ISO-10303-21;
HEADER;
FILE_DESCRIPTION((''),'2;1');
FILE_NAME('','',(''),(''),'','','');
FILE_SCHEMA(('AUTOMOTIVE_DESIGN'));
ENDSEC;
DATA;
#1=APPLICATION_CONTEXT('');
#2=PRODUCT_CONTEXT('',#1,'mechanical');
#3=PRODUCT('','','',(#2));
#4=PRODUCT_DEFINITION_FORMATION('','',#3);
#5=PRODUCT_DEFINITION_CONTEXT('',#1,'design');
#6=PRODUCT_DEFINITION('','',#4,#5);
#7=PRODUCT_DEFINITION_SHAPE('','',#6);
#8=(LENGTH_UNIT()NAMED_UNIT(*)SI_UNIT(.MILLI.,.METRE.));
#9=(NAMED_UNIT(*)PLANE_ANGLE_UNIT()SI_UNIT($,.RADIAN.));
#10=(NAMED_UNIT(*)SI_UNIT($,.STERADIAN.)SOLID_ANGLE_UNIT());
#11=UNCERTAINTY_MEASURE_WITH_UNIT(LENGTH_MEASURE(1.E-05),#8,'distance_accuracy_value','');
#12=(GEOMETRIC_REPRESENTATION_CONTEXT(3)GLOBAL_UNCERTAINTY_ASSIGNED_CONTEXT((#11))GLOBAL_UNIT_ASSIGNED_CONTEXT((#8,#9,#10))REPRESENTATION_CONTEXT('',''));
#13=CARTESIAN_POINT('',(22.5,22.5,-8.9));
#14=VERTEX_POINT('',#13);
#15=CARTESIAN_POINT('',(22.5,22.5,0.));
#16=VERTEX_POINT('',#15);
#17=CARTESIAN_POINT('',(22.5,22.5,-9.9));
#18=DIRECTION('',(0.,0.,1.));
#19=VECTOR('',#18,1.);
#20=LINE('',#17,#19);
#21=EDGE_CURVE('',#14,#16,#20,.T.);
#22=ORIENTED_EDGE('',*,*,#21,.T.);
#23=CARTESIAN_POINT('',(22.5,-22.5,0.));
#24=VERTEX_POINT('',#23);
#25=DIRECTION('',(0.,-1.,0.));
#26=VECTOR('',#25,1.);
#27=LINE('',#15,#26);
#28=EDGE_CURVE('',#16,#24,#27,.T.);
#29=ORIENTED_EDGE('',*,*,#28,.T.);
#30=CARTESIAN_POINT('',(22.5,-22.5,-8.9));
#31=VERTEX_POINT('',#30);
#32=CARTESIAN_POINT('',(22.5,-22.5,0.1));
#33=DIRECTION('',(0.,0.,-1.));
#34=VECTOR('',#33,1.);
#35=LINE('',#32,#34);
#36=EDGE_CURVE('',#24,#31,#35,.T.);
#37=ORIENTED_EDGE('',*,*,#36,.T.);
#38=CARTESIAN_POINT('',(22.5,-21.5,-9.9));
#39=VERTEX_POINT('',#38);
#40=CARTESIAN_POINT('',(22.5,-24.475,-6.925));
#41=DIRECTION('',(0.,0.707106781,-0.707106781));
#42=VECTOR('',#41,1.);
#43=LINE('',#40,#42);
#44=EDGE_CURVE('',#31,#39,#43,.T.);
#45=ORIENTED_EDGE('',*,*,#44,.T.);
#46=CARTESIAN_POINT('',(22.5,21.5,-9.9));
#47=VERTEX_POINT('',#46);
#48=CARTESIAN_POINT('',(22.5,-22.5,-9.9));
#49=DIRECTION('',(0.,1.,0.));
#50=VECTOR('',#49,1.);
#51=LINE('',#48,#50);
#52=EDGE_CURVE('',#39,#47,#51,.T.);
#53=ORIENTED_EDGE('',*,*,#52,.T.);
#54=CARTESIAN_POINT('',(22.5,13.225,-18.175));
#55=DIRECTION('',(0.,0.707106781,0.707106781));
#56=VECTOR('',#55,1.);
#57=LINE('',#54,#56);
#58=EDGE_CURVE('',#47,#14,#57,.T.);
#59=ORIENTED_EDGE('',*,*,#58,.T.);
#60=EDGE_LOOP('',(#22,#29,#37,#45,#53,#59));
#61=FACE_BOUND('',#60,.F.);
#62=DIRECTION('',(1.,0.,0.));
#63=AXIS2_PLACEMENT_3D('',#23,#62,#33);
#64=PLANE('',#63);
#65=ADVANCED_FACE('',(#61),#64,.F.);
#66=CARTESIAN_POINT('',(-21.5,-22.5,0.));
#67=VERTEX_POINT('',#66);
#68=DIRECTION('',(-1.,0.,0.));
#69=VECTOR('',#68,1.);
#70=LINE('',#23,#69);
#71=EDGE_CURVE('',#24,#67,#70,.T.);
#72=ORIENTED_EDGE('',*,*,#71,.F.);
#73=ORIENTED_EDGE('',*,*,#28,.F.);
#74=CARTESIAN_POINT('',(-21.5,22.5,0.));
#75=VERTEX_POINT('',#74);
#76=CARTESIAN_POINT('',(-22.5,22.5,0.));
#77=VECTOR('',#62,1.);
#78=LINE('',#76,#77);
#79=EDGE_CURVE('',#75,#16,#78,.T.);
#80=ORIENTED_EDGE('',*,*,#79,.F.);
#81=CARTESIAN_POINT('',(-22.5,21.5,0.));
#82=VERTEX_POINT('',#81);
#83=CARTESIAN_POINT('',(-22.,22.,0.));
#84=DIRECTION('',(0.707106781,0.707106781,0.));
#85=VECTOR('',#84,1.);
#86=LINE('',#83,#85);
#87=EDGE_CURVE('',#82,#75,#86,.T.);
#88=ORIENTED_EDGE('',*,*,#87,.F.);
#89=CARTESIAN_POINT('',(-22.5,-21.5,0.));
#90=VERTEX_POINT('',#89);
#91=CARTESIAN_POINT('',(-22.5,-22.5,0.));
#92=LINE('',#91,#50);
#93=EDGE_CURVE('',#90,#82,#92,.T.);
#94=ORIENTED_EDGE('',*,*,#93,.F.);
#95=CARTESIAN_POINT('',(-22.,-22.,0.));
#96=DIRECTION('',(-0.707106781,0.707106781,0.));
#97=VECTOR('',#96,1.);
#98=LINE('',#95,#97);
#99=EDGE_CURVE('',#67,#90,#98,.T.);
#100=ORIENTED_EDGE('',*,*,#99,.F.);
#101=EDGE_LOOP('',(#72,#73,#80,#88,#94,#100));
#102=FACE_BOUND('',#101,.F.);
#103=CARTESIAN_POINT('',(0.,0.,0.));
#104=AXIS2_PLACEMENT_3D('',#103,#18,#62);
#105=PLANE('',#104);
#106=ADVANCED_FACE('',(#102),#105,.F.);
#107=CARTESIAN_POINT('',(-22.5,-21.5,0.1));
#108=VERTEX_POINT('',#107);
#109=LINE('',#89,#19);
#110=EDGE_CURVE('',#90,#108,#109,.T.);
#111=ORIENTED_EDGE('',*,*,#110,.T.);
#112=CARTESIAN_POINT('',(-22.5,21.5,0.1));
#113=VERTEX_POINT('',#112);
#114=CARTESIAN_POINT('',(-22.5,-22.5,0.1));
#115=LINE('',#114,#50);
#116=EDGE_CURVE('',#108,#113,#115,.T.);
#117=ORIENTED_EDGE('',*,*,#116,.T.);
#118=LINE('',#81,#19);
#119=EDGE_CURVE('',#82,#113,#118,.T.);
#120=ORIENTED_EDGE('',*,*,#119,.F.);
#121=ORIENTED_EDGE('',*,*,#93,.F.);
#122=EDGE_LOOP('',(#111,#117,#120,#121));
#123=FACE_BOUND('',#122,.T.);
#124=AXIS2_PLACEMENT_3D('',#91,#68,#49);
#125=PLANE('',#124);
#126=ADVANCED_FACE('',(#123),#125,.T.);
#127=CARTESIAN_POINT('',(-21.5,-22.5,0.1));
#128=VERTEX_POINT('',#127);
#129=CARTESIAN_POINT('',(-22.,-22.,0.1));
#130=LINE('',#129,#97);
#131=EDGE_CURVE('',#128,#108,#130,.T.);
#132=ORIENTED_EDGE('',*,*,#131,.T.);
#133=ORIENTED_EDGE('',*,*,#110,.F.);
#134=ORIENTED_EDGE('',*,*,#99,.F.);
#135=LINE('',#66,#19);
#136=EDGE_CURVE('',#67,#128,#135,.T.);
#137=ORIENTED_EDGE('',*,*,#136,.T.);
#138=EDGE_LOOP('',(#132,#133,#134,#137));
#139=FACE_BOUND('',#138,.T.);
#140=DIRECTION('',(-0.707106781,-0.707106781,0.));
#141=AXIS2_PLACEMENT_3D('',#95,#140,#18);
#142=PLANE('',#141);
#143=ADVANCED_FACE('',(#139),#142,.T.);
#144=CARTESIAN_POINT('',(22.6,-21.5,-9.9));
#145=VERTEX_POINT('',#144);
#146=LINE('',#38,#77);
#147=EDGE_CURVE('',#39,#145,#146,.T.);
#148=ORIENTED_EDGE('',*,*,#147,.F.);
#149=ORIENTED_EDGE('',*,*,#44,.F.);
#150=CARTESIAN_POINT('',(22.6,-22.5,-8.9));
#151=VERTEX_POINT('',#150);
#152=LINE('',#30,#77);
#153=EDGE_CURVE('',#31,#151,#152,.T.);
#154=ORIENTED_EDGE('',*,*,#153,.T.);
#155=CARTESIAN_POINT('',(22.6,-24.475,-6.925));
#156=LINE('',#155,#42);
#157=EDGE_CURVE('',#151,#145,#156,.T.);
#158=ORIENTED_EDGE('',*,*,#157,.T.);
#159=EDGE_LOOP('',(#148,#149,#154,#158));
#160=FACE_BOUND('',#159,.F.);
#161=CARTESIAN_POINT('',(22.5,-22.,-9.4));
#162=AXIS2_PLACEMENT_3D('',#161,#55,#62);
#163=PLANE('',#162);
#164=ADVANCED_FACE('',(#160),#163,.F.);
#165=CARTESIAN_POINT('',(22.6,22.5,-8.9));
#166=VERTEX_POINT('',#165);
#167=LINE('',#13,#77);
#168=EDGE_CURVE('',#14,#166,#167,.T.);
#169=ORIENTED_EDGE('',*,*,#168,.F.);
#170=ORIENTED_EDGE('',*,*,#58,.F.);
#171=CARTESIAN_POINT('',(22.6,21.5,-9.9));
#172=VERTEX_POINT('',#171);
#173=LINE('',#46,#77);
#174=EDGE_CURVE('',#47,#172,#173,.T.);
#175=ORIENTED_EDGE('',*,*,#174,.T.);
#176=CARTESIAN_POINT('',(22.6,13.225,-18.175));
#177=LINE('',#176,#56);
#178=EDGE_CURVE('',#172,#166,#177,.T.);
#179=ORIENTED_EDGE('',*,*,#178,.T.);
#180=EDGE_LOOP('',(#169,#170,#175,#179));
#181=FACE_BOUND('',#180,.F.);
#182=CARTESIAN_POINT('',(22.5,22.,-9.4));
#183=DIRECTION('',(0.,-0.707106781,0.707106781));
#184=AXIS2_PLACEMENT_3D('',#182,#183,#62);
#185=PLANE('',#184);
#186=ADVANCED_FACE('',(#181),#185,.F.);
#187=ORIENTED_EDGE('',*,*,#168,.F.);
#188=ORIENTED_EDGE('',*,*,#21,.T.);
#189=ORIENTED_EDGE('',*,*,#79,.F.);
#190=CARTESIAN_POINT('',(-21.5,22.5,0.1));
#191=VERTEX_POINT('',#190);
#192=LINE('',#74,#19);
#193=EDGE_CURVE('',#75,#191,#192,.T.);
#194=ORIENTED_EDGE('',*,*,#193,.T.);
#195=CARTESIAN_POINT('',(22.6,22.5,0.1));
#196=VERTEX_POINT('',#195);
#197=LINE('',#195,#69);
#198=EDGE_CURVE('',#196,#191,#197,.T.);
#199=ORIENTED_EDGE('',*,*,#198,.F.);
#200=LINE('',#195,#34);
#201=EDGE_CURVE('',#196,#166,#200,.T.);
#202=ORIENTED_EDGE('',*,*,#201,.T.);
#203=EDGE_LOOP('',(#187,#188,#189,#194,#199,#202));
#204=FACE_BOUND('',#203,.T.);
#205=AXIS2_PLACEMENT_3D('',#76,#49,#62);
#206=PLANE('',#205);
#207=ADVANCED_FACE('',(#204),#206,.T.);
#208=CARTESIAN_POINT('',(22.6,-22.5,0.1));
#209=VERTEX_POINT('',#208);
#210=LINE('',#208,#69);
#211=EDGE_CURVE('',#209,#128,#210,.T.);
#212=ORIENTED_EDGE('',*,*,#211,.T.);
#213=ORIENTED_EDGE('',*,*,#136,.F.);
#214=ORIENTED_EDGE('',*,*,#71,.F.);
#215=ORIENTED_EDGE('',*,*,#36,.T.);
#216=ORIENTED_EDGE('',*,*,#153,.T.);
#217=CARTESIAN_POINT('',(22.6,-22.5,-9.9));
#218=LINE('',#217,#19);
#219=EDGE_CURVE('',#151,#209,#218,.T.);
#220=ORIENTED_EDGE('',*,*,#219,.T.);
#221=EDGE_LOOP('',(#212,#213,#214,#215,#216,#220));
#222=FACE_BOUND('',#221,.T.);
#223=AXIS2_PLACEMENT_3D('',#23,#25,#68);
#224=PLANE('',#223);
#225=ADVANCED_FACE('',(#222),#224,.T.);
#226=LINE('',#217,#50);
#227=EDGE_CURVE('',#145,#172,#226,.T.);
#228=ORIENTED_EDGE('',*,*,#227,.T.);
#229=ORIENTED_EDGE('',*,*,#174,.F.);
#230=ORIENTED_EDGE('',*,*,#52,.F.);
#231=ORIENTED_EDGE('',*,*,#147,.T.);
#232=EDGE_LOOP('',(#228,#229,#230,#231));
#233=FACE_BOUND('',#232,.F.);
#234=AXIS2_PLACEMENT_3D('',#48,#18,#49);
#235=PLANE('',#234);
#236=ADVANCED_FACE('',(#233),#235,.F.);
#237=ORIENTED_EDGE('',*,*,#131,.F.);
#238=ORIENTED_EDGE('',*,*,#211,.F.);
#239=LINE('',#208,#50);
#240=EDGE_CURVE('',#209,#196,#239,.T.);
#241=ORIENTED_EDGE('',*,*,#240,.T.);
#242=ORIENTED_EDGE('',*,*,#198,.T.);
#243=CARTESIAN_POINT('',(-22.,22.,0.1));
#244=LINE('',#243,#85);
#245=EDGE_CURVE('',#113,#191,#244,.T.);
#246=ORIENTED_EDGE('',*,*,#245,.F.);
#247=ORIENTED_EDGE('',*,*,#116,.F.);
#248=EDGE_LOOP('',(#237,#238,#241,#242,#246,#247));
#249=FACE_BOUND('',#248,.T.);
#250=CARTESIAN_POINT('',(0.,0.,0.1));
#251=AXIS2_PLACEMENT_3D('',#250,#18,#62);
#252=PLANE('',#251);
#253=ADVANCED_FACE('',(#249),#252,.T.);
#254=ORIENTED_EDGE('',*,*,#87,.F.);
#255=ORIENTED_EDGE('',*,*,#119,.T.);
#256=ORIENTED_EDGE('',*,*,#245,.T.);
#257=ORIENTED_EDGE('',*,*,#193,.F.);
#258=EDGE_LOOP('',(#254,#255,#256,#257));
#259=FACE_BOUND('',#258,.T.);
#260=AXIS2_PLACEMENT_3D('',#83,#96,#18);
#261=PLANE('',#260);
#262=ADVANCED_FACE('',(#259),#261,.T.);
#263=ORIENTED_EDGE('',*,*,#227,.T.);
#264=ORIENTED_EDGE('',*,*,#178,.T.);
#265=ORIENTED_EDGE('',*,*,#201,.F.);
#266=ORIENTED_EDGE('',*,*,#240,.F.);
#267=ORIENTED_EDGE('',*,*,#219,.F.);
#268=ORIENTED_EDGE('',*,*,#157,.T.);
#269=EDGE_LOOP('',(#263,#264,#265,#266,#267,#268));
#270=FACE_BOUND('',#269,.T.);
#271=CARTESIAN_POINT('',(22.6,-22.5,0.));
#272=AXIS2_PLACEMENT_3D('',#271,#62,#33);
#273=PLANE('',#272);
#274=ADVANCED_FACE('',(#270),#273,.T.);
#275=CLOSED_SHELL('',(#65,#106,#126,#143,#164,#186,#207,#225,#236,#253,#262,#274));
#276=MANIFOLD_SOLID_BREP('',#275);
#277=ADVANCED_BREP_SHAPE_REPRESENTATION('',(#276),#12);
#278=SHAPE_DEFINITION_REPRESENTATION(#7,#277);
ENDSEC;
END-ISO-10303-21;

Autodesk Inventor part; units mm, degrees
ref_plane "YZ Plane" through (0, 0, 0) normal (1, 0, 0) x (0, 1, 0)
ref_plane "XZ Plane" through (0, 0, 0) normal (0, 1, 0) x (-1, 0, 0)
ref_plane "XY Plane" through (0, 0, 0) normal (0, 0, 1) x (1, 0, 0)
sketch "Sketch1" plane through (0, 0, 0) normal (0, 0, 1) x (1, 0, 0)
  line L0 (22, -19) -> (22, 19) projected
  line L1 (-19, -22) -> (19, -22) projected
  line L2 (22.5, 22.5) -> (22.5, -22.5)
  line L3 (22.5, -22.5) -> (-22.5, -22.5)
  line L4 (-22.5, -22.5) -> (-22.5, 22.5)
  line L5 (-22.5, 22.5) -> (22.5, 22.5)
  line L6 (22.5, 22.5) -> (-22.5, -22.5) construction
  line L7 (22.5, -22.5) -> (-22.5, 22.5) construction
  point P0 (0, 0)
  dimension "d0" = 45
  dimension "d1" = 45
extrude "Extrusion1" add sketch "Sketch1" along normal blind 0.1
sketch "Sketch2" plane through (22.5, -22.5, 0) normal (1, 0, 0) x (0, 0, -1)
  line L0 (-0.1, 0) -> (-0.1, 45) projected
  line L1 (0, 0) -> (0, 45) projected
  line L2 (0, 45) -> (-0.1, 45) projected
  line L3 (-0.1, 0) -> (-0.1, 45) projected
  line L4 (0, 0) -> (-0.1, 0) projected
  line L5 (-0.1, 0) -> (9.9, 0)
  line L6 (9.9, 0) -> (9.9, 45)
  line L7 (9.9, 45) -> (-0.1, 45)
  line L8 (-0.1, 45) -> (-0.1, 0)
  point P0 (0, 22.5)
  dimension "d4" = 10
  dimension "d5" = 45
extrude "Extrusion2" add sketch "Sketch2" along normal blind 0.1
chamfer "Chamfer1" distance 1 angle 45 2 edges at (22.55, -22.5, -9.9) (22.55, 22.5, -9.9)
chamfer "Chamfer2" distance 1 angle 45 2 edges at (-22.5, 22.5, 0.05) (-22.5, -22.5, 0.05)
properties part number "tag"
